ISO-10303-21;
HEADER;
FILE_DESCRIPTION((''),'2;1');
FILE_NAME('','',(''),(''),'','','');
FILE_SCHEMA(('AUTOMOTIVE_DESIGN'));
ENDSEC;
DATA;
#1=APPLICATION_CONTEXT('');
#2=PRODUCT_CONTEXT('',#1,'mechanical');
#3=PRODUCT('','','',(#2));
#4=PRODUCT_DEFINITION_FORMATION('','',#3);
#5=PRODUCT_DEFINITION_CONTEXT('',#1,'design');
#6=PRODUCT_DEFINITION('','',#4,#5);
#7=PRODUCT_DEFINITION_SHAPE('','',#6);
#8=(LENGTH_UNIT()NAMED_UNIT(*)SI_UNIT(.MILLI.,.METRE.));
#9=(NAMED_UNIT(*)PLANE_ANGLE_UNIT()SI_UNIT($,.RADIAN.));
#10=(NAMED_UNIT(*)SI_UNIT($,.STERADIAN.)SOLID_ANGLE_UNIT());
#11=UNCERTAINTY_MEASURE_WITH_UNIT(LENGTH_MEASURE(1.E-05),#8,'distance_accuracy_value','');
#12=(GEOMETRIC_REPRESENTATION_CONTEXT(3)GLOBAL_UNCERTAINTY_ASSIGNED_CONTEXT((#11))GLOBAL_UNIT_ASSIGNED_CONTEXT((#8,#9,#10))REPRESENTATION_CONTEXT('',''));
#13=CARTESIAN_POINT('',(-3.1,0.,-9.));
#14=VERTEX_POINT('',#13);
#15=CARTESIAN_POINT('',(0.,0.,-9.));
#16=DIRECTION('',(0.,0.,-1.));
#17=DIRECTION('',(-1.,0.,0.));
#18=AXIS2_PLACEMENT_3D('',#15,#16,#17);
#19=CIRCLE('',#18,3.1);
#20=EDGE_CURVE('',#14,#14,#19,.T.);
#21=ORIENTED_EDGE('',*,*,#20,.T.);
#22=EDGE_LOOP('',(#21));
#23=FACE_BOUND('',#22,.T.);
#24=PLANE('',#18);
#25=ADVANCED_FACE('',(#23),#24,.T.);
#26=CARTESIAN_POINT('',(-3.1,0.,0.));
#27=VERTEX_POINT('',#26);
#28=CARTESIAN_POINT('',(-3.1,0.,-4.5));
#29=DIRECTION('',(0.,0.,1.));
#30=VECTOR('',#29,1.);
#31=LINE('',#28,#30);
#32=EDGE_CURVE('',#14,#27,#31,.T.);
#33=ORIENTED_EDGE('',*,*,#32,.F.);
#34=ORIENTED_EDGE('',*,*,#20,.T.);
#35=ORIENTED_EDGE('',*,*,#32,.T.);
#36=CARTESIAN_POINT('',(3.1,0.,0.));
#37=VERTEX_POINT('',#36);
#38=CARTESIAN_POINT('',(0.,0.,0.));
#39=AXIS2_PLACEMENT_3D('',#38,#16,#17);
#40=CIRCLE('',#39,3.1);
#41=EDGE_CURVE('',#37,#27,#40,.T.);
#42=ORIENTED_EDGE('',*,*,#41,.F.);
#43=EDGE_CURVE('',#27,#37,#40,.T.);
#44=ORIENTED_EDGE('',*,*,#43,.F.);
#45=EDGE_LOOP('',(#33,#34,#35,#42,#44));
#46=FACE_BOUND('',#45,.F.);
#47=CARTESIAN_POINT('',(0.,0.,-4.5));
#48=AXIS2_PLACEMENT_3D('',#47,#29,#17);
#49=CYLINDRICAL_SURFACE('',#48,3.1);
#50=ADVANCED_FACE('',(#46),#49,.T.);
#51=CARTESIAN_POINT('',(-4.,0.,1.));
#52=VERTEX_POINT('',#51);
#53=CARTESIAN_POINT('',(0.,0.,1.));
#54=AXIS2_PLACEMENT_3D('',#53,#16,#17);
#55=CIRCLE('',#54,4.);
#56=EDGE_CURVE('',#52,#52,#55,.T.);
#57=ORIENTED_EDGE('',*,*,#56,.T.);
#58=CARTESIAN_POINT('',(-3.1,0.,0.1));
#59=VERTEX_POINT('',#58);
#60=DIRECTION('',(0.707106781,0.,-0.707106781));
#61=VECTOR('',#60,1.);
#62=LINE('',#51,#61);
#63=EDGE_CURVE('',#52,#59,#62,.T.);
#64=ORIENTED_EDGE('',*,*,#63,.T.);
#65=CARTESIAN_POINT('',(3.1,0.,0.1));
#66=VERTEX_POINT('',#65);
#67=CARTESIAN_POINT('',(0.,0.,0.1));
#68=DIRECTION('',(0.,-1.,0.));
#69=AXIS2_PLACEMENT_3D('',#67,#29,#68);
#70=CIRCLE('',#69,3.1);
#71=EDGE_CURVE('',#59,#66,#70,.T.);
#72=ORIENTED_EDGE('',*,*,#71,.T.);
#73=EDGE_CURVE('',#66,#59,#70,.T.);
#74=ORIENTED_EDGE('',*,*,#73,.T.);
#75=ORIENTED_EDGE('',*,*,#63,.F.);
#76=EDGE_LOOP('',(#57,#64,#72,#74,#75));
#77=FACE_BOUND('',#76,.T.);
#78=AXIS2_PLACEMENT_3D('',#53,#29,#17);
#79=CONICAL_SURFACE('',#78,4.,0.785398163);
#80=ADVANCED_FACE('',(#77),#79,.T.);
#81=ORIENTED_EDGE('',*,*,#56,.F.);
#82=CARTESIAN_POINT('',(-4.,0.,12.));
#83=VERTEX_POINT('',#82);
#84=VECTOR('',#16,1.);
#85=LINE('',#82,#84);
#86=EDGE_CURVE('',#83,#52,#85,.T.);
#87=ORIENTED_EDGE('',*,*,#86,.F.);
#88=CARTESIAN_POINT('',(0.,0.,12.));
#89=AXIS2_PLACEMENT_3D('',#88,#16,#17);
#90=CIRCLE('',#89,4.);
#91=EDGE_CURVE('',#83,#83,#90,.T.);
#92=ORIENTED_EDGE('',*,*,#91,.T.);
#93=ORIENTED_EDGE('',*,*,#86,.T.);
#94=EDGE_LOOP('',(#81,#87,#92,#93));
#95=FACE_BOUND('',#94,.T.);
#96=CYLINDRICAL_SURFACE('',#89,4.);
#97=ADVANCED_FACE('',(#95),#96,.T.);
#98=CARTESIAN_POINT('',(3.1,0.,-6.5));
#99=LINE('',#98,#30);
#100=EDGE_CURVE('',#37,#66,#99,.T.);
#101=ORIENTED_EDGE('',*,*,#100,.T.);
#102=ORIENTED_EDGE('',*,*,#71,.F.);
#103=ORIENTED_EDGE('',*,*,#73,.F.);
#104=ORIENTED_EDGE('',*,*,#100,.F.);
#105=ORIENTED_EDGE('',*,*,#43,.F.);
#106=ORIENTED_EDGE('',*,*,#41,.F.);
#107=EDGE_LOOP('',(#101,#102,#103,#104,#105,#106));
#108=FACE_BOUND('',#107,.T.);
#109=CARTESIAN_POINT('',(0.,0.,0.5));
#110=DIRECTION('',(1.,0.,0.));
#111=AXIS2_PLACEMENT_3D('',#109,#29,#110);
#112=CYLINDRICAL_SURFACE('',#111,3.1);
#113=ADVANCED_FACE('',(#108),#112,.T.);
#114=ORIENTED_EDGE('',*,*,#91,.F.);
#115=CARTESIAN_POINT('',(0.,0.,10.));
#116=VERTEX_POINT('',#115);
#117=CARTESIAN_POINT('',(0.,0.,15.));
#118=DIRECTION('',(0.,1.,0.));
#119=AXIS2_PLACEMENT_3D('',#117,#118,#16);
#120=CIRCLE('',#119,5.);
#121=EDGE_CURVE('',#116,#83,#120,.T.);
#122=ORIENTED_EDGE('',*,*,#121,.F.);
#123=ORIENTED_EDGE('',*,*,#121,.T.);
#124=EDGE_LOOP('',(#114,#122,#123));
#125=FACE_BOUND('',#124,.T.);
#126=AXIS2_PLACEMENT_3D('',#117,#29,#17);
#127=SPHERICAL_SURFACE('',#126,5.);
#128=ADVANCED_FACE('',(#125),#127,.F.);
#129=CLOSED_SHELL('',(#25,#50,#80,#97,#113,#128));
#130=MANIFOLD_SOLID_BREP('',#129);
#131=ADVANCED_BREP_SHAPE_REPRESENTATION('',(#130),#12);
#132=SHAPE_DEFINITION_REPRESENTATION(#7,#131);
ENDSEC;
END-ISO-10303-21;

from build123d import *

# Parameters (mm, degrees)
F0_W        = 3.1
F0_H        = 9
F2_S5_R     = 3.1
F2_T6_DEPTH = 7


# Not quite as in the source:
# - a fillet or chamfer that OpenCascade refuses, or shapes differently, is made with other operations: its cross-section is extruded or revolved along the edge and cut away or added


with BuildPart() as f1:
    # F0 (on Front) → F1 (revolve)
    with BuildSketch(Plane.XZ):
        with Locations((-1.55, -4.5)):
            Rectangle(F0_W, F0_H)
        with BuildLine():
            Line((0, 0), (0, 10))
            ThreePointArc((0, 10), (-2.2360679775, 10.527864045), (-4, 12))
            Line((-4, 12), (-4, 0))
            Line((-4, 0), (-3.1, 0))
            Line((-3.1, 0), (0, 0))
        make_face()
    revolve(axis=Axis((0, 0, 1.5), (0, 0, -1)))

    # F2: chamfer of 1 on 1 edges, made by hand


with BuildPart() as f2_tool2:
    # F2_s3 → F2_t4 (revolve)
    with BuildSketch(Plane.XZ):
        Polygon((-4, 1), (-3, 0), (-4, 0), align=None)
    revolve(axis=Axis((0, 0, 0), (0, 0, -1)))

    # F2_s5 → F2_t6 (cut, symmetric)
    with BuildSketch(Plane.XY.offset(0.5)):
        Circle(F2_S5_R)
    extrude(amount=F2_T6_DEPTH, both=True, mode=Mode.SUBTRACT)


with BuildPart() as f1_1:
    add(f1.part)

    # F2_t1: cut F2_tool2
    add(f2_tool2.part, mode=Mode.SUBTRACT)


solid = f1_1.part
